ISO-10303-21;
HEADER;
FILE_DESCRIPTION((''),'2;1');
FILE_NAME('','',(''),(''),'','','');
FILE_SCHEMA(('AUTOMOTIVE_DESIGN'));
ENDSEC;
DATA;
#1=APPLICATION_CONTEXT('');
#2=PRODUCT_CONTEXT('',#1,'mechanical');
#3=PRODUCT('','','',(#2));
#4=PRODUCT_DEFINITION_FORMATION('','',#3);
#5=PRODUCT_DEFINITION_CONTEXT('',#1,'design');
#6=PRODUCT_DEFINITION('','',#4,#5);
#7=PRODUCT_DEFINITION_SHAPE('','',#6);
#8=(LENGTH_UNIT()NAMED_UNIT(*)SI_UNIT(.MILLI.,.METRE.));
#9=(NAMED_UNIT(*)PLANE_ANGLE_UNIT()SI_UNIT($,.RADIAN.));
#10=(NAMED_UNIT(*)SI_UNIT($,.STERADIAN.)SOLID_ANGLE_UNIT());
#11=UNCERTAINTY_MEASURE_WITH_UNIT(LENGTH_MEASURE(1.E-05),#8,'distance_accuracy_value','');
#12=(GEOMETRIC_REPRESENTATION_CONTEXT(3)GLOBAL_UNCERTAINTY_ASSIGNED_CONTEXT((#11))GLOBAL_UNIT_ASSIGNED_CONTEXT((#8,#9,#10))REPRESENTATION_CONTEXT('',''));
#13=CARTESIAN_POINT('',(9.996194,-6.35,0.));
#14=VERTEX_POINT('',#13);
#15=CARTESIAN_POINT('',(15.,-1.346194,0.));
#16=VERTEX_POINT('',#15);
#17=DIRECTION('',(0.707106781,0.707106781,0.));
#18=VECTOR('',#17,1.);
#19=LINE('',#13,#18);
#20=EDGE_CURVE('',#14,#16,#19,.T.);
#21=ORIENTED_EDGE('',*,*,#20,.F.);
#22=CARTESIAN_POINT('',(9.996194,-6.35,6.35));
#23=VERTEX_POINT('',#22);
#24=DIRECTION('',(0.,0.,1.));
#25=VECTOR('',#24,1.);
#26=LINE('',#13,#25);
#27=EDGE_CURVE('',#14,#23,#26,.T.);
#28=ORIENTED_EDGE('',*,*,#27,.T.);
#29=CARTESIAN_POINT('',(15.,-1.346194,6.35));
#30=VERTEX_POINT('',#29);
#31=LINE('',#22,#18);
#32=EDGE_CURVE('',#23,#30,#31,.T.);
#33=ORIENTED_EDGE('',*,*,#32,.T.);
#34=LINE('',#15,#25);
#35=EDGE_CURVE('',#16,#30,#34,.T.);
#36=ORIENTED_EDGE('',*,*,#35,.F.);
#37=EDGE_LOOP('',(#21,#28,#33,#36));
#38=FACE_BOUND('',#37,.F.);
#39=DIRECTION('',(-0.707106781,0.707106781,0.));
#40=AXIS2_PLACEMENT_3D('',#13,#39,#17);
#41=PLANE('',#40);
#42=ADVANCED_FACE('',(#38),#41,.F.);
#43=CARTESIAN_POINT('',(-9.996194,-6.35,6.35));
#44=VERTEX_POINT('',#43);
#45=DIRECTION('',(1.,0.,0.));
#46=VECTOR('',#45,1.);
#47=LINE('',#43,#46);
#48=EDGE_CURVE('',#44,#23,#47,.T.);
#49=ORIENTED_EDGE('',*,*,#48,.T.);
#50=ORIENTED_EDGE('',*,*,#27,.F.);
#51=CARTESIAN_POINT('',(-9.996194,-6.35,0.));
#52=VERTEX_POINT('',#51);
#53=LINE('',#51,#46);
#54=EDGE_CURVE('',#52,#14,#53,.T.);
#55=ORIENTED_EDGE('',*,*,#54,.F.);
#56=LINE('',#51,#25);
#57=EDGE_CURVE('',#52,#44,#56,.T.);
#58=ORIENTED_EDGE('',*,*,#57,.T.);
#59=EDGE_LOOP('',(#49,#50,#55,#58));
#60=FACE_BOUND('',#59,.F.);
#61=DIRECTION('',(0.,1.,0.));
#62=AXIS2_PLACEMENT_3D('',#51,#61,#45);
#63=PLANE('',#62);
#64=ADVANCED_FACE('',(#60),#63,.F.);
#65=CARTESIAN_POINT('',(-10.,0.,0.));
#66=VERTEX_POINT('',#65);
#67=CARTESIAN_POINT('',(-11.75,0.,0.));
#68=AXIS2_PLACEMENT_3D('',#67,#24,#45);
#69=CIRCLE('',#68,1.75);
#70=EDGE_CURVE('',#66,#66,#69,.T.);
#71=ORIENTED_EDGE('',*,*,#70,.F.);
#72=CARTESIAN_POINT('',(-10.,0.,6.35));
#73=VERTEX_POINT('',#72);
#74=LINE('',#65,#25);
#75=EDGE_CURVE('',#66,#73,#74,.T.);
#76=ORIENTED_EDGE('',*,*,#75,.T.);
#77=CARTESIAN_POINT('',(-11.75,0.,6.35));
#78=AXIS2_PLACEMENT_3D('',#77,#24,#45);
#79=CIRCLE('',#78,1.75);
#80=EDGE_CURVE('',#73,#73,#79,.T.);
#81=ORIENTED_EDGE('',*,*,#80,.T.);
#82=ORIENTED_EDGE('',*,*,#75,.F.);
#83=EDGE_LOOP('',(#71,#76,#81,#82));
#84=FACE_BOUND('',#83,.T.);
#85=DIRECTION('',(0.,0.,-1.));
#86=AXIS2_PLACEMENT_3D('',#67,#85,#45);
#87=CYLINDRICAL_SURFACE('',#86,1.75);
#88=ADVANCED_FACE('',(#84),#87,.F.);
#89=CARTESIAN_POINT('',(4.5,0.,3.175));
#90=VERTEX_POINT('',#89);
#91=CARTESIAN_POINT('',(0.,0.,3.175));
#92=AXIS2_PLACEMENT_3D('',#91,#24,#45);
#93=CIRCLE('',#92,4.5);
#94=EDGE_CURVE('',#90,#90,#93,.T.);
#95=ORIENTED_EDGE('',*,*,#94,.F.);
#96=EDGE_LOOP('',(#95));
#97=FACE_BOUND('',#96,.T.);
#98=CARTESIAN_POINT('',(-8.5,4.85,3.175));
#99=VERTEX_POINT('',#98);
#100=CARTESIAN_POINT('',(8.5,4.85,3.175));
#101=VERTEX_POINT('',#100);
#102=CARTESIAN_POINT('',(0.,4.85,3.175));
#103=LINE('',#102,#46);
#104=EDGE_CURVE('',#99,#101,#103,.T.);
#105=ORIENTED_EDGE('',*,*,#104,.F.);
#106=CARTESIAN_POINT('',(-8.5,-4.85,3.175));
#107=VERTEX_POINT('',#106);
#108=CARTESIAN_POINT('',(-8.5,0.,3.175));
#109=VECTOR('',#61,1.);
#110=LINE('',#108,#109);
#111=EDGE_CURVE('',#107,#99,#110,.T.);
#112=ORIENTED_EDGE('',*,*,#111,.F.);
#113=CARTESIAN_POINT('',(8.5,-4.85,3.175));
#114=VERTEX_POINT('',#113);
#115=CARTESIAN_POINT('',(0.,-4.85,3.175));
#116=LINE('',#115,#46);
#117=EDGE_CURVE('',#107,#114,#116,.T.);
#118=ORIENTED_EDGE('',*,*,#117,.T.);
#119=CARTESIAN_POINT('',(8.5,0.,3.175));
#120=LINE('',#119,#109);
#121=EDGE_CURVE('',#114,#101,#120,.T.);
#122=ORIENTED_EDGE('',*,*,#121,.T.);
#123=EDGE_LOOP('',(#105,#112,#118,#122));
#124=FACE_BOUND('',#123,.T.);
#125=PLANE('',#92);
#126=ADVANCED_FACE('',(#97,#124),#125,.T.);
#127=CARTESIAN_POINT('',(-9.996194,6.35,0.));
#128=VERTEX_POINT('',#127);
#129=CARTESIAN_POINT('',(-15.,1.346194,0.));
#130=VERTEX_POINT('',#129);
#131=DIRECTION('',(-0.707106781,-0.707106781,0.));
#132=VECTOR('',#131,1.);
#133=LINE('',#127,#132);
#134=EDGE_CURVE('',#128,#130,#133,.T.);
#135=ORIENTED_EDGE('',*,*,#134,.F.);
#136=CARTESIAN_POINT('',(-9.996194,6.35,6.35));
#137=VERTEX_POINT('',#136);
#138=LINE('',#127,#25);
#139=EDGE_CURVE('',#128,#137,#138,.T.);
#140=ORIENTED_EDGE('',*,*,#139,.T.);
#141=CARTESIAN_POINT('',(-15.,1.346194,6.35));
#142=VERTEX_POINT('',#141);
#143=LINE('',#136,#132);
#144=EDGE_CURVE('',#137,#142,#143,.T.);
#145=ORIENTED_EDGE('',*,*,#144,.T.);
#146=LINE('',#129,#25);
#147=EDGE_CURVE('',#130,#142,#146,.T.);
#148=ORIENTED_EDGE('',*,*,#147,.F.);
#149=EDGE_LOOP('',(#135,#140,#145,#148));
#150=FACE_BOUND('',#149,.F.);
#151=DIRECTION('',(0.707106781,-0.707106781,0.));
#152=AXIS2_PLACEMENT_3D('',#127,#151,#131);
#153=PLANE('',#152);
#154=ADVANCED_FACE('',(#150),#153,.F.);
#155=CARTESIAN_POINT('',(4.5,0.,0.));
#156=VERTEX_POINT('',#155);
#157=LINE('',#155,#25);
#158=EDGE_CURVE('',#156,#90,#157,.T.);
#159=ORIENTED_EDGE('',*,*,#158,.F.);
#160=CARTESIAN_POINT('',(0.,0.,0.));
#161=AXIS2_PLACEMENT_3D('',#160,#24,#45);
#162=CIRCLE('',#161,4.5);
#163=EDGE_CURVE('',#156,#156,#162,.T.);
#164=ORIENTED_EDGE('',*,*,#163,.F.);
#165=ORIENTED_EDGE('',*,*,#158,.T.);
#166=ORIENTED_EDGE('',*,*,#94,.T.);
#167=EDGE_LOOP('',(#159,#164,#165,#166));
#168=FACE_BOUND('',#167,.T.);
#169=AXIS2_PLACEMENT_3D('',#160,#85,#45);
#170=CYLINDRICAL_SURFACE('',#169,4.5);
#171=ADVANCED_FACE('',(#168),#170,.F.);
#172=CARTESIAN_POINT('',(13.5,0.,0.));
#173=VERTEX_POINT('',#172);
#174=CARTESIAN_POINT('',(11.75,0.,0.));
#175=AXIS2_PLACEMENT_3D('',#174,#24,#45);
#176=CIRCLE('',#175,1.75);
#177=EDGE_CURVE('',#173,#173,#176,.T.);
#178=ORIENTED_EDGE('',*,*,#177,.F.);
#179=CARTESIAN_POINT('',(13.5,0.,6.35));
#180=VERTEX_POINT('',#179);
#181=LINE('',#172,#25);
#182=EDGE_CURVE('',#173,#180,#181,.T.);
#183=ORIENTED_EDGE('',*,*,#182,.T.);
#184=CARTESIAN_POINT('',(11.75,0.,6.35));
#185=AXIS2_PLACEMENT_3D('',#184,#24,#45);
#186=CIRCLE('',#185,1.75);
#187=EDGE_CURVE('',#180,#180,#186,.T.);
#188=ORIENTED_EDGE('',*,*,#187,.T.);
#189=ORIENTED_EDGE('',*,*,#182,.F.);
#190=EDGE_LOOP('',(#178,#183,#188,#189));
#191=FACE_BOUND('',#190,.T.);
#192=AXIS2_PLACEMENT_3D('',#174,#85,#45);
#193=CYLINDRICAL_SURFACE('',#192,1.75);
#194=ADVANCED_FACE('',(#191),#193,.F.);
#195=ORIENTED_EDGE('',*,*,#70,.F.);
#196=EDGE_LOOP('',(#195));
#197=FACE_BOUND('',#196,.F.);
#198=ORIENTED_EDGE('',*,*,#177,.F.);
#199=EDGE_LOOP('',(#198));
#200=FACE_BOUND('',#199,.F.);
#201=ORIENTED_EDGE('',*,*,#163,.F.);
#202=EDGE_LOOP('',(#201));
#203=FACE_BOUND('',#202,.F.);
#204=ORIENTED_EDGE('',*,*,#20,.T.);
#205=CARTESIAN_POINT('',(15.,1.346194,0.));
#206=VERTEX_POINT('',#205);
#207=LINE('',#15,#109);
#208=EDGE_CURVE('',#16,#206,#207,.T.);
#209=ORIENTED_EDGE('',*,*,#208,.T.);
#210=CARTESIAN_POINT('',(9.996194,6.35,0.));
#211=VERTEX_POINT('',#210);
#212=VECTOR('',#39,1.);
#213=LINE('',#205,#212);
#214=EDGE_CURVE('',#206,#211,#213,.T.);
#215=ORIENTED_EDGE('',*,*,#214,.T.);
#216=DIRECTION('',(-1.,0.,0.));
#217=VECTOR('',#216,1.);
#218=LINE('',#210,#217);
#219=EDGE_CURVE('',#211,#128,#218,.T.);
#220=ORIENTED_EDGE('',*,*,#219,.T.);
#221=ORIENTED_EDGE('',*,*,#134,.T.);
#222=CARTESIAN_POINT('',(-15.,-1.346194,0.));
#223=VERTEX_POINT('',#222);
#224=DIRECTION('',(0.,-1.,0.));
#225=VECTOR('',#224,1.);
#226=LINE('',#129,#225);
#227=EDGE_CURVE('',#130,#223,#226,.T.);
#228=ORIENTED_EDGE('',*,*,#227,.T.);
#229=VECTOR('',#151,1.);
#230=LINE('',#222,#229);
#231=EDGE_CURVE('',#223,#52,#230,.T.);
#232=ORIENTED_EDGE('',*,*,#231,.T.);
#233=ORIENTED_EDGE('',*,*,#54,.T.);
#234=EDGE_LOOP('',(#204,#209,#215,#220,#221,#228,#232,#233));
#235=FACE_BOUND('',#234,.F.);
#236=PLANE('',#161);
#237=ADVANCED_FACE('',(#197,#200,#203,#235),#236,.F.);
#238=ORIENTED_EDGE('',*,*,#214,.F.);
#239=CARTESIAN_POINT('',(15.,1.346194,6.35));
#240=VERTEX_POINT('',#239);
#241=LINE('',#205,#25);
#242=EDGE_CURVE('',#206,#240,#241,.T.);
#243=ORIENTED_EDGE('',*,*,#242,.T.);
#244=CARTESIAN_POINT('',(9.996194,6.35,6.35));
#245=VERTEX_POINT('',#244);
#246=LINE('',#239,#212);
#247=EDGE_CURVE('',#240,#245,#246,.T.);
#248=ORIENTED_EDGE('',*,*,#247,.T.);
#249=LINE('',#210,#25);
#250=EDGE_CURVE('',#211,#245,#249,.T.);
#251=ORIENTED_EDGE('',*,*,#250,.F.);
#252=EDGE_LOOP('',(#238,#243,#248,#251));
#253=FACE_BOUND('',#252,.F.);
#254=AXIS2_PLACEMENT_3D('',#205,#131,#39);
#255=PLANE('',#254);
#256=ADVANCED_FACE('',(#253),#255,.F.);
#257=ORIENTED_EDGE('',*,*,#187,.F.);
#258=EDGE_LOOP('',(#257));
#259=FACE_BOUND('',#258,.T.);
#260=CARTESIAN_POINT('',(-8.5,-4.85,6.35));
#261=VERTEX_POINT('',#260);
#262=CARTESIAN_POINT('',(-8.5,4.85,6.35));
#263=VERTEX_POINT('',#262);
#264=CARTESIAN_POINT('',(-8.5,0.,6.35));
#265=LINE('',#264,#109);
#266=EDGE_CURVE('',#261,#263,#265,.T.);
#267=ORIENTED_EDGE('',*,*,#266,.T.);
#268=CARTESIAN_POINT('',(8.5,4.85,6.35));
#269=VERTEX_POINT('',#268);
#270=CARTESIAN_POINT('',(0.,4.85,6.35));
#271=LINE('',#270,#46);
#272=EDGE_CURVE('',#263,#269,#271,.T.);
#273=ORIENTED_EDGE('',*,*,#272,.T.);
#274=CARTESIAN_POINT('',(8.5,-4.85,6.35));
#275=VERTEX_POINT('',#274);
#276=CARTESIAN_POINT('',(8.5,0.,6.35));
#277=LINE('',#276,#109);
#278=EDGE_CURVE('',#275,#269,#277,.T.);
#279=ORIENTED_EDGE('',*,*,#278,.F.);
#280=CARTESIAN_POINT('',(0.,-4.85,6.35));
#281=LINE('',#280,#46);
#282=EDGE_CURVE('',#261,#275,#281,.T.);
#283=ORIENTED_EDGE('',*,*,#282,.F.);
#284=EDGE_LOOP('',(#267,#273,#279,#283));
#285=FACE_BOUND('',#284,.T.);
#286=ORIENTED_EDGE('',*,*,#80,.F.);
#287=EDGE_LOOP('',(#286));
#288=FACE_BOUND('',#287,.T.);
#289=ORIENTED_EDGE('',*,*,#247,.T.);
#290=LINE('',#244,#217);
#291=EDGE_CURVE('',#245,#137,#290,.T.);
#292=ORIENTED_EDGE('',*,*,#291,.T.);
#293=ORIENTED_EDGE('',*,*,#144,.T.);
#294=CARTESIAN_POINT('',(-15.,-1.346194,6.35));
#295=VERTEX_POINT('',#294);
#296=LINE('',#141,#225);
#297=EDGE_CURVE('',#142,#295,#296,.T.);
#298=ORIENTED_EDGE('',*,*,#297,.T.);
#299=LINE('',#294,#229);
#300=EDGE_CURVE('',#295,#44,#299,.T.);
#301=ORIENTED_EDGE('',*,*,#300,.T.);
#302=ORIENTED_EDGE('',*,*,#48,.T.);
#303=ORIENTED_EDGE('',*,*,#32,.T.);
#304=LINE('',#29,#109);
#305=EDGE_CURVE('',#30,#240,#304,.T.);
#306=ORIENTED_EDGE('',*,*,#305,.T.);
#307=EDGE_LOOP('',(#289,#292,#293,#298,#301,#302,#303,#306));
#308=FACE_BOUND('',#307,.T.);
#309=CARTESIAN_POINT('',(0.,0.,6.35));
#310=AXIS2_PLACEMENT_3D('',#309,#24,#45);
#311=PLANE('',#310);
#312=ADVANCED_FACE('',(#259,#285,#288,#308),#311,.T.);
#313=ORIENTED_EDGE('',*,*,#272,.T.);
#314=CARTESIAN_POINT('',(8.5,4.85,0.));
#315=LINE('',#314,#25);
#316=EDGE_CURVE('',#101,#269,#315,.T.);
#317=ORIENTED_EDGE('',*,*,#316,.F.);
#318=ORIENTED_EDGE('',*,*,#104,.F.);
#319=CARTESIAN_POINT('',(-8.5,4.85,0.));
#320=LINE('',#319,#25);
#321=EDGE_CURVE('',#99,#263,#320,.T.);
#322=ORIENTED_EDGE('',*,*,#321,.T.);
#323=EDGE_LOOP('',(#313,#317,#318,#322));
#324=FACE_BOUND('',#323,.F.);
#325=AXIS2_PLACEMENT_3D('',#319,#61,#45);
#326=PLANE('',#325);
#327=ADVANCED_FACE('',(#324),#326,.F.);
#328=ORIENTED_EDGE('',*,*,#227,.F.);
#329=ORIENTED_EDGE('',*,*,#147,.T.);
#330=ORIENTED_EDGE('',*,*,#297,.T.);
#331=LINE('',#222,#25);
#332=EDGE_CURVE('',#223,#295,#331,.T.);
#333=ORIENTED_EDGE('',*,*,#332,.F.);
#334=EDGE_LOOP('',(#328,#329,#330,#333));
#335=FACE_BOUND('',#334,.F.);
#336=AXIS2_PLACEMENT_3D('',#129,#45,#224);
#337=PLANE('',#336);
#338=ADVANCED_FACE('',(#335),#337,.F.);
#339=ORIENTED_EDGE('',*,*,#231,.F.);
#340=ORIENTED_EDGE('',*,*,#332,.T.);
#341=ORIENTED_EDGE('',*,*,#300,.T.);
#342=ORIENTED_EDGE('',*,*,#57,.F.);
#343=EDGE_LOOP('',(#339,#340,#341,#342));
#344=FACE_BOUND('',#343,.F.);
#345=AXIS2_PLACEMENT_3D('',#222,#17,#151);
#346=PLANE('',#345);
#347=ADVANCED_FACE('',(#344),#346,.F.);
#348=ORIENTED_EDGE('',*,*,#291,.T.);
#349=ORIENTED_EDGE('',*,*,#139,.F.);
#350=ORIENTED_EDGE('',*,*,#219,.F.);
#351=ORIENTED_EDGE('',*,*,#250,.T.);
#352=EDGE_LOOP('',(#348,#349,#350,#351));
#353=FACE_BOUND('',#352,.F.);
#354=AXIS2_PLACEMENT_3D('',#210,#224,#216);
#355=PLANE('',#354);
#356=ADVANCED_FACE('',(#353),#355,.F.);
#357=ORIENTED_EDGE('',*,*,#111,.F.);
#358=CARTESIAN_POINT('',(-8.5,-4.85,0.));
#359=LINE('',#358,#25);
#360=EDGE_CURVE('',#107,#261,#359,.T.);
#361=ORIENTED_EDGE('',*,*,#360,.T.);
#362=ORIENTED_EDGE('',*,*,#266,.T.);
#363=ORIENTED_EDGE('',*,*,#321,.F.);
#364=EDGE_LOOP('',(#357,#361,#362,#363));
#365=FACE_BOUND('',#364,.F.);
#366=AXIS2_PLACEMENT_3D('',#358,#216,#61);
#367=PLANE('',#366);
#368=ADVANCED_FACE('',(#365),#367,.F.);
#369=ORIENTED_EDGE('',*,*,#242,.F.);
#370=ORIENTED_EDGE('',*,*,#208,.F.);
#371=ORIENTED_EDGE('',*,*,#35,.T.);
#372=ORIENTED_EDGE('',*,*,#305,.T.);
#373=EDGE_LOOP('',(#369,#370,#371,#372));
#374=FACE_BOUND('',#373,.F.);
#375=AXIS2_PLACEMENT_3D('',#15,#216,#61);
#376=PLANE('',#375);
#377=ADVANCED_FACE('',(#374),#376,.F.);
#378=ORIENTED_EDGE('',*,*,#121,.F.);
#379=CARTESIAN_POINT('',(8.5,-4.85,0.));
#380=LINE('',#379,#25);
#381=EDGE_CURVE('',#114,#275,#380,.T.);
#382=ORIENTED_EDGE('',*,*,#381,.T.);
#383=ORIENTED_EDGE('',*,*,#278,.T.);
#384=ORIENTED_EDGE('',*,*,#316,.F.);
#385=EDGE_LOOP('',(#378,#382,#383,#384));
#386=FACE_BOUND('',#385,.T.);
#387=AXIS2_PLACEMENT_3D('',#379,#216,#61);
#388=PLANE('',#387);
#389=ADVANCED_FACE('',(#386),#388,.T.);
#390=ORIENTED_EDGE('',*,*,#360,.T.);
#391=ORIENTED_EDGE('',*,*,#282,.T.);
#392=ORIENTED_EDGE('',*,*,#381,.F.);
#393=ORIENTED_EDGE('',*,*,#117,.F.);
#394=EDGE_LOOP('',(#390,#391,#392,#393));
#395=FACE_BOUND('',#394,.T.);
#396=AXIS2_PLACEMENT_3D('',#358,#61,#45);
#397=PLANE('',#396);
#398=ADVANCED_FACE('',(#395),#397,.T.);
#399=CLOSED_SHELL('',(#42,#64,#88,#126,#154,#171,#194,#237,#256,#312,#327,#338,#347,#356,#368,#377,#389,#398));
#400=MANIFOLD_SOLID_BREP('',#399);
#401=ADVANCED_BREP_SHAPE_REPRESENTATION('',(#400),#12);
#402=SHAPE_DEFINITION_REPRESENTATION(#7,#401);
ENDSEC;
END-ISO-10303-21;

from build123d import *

# Parameters (mm, degrees)
F0_R     = 1.75
F0_W     = 17
F0_H     = 9.7
F1_DEPTH = 6.35
F0_R_2   = 4.5
F2_DEPTH = 3.175


# Not quite as in the source:
# - a length typed as a fraction of an inch, garbled in the dataset ("3 / 203.2 mm" for 3/8 in), is restored


with BuildPart() as f1:
    # F0 (on Top) → F1 (new body)
    with BuildSketch(Plane.XY):
        Polygon((9.9961940777, 6.35), (-9.9961940777, 6.35), (-15, 1.3461940777), (-15, -1.3461940777), (-9.9961940777, -6.35), (9.9961940777, -6.35), (15, -1.3461940777), (15, 1.3461940777), align=None)
        with Locations((-11.75, 0)):
            Circle(F0_R, mode=Mode.SUBTRACT)
        Rectangle(F0_W, F0_H, mode=Mode.SUBTRACT)
        with Locations((11.75, 0)):
            Circle(F0_R, mode=Mode.SUBTRACT)
    extrude(amount=F1_DEPTH)

    # F0 (on Top) → F2 (join)
    with BuildSketch(Plane.XY):
        Rectangle(F0_W, F0_H)
        Circle(F0_R_2, mode=Mode.SUBTRACT)
    extrude(amount=F2_DEPTH)


solid = f1.part
